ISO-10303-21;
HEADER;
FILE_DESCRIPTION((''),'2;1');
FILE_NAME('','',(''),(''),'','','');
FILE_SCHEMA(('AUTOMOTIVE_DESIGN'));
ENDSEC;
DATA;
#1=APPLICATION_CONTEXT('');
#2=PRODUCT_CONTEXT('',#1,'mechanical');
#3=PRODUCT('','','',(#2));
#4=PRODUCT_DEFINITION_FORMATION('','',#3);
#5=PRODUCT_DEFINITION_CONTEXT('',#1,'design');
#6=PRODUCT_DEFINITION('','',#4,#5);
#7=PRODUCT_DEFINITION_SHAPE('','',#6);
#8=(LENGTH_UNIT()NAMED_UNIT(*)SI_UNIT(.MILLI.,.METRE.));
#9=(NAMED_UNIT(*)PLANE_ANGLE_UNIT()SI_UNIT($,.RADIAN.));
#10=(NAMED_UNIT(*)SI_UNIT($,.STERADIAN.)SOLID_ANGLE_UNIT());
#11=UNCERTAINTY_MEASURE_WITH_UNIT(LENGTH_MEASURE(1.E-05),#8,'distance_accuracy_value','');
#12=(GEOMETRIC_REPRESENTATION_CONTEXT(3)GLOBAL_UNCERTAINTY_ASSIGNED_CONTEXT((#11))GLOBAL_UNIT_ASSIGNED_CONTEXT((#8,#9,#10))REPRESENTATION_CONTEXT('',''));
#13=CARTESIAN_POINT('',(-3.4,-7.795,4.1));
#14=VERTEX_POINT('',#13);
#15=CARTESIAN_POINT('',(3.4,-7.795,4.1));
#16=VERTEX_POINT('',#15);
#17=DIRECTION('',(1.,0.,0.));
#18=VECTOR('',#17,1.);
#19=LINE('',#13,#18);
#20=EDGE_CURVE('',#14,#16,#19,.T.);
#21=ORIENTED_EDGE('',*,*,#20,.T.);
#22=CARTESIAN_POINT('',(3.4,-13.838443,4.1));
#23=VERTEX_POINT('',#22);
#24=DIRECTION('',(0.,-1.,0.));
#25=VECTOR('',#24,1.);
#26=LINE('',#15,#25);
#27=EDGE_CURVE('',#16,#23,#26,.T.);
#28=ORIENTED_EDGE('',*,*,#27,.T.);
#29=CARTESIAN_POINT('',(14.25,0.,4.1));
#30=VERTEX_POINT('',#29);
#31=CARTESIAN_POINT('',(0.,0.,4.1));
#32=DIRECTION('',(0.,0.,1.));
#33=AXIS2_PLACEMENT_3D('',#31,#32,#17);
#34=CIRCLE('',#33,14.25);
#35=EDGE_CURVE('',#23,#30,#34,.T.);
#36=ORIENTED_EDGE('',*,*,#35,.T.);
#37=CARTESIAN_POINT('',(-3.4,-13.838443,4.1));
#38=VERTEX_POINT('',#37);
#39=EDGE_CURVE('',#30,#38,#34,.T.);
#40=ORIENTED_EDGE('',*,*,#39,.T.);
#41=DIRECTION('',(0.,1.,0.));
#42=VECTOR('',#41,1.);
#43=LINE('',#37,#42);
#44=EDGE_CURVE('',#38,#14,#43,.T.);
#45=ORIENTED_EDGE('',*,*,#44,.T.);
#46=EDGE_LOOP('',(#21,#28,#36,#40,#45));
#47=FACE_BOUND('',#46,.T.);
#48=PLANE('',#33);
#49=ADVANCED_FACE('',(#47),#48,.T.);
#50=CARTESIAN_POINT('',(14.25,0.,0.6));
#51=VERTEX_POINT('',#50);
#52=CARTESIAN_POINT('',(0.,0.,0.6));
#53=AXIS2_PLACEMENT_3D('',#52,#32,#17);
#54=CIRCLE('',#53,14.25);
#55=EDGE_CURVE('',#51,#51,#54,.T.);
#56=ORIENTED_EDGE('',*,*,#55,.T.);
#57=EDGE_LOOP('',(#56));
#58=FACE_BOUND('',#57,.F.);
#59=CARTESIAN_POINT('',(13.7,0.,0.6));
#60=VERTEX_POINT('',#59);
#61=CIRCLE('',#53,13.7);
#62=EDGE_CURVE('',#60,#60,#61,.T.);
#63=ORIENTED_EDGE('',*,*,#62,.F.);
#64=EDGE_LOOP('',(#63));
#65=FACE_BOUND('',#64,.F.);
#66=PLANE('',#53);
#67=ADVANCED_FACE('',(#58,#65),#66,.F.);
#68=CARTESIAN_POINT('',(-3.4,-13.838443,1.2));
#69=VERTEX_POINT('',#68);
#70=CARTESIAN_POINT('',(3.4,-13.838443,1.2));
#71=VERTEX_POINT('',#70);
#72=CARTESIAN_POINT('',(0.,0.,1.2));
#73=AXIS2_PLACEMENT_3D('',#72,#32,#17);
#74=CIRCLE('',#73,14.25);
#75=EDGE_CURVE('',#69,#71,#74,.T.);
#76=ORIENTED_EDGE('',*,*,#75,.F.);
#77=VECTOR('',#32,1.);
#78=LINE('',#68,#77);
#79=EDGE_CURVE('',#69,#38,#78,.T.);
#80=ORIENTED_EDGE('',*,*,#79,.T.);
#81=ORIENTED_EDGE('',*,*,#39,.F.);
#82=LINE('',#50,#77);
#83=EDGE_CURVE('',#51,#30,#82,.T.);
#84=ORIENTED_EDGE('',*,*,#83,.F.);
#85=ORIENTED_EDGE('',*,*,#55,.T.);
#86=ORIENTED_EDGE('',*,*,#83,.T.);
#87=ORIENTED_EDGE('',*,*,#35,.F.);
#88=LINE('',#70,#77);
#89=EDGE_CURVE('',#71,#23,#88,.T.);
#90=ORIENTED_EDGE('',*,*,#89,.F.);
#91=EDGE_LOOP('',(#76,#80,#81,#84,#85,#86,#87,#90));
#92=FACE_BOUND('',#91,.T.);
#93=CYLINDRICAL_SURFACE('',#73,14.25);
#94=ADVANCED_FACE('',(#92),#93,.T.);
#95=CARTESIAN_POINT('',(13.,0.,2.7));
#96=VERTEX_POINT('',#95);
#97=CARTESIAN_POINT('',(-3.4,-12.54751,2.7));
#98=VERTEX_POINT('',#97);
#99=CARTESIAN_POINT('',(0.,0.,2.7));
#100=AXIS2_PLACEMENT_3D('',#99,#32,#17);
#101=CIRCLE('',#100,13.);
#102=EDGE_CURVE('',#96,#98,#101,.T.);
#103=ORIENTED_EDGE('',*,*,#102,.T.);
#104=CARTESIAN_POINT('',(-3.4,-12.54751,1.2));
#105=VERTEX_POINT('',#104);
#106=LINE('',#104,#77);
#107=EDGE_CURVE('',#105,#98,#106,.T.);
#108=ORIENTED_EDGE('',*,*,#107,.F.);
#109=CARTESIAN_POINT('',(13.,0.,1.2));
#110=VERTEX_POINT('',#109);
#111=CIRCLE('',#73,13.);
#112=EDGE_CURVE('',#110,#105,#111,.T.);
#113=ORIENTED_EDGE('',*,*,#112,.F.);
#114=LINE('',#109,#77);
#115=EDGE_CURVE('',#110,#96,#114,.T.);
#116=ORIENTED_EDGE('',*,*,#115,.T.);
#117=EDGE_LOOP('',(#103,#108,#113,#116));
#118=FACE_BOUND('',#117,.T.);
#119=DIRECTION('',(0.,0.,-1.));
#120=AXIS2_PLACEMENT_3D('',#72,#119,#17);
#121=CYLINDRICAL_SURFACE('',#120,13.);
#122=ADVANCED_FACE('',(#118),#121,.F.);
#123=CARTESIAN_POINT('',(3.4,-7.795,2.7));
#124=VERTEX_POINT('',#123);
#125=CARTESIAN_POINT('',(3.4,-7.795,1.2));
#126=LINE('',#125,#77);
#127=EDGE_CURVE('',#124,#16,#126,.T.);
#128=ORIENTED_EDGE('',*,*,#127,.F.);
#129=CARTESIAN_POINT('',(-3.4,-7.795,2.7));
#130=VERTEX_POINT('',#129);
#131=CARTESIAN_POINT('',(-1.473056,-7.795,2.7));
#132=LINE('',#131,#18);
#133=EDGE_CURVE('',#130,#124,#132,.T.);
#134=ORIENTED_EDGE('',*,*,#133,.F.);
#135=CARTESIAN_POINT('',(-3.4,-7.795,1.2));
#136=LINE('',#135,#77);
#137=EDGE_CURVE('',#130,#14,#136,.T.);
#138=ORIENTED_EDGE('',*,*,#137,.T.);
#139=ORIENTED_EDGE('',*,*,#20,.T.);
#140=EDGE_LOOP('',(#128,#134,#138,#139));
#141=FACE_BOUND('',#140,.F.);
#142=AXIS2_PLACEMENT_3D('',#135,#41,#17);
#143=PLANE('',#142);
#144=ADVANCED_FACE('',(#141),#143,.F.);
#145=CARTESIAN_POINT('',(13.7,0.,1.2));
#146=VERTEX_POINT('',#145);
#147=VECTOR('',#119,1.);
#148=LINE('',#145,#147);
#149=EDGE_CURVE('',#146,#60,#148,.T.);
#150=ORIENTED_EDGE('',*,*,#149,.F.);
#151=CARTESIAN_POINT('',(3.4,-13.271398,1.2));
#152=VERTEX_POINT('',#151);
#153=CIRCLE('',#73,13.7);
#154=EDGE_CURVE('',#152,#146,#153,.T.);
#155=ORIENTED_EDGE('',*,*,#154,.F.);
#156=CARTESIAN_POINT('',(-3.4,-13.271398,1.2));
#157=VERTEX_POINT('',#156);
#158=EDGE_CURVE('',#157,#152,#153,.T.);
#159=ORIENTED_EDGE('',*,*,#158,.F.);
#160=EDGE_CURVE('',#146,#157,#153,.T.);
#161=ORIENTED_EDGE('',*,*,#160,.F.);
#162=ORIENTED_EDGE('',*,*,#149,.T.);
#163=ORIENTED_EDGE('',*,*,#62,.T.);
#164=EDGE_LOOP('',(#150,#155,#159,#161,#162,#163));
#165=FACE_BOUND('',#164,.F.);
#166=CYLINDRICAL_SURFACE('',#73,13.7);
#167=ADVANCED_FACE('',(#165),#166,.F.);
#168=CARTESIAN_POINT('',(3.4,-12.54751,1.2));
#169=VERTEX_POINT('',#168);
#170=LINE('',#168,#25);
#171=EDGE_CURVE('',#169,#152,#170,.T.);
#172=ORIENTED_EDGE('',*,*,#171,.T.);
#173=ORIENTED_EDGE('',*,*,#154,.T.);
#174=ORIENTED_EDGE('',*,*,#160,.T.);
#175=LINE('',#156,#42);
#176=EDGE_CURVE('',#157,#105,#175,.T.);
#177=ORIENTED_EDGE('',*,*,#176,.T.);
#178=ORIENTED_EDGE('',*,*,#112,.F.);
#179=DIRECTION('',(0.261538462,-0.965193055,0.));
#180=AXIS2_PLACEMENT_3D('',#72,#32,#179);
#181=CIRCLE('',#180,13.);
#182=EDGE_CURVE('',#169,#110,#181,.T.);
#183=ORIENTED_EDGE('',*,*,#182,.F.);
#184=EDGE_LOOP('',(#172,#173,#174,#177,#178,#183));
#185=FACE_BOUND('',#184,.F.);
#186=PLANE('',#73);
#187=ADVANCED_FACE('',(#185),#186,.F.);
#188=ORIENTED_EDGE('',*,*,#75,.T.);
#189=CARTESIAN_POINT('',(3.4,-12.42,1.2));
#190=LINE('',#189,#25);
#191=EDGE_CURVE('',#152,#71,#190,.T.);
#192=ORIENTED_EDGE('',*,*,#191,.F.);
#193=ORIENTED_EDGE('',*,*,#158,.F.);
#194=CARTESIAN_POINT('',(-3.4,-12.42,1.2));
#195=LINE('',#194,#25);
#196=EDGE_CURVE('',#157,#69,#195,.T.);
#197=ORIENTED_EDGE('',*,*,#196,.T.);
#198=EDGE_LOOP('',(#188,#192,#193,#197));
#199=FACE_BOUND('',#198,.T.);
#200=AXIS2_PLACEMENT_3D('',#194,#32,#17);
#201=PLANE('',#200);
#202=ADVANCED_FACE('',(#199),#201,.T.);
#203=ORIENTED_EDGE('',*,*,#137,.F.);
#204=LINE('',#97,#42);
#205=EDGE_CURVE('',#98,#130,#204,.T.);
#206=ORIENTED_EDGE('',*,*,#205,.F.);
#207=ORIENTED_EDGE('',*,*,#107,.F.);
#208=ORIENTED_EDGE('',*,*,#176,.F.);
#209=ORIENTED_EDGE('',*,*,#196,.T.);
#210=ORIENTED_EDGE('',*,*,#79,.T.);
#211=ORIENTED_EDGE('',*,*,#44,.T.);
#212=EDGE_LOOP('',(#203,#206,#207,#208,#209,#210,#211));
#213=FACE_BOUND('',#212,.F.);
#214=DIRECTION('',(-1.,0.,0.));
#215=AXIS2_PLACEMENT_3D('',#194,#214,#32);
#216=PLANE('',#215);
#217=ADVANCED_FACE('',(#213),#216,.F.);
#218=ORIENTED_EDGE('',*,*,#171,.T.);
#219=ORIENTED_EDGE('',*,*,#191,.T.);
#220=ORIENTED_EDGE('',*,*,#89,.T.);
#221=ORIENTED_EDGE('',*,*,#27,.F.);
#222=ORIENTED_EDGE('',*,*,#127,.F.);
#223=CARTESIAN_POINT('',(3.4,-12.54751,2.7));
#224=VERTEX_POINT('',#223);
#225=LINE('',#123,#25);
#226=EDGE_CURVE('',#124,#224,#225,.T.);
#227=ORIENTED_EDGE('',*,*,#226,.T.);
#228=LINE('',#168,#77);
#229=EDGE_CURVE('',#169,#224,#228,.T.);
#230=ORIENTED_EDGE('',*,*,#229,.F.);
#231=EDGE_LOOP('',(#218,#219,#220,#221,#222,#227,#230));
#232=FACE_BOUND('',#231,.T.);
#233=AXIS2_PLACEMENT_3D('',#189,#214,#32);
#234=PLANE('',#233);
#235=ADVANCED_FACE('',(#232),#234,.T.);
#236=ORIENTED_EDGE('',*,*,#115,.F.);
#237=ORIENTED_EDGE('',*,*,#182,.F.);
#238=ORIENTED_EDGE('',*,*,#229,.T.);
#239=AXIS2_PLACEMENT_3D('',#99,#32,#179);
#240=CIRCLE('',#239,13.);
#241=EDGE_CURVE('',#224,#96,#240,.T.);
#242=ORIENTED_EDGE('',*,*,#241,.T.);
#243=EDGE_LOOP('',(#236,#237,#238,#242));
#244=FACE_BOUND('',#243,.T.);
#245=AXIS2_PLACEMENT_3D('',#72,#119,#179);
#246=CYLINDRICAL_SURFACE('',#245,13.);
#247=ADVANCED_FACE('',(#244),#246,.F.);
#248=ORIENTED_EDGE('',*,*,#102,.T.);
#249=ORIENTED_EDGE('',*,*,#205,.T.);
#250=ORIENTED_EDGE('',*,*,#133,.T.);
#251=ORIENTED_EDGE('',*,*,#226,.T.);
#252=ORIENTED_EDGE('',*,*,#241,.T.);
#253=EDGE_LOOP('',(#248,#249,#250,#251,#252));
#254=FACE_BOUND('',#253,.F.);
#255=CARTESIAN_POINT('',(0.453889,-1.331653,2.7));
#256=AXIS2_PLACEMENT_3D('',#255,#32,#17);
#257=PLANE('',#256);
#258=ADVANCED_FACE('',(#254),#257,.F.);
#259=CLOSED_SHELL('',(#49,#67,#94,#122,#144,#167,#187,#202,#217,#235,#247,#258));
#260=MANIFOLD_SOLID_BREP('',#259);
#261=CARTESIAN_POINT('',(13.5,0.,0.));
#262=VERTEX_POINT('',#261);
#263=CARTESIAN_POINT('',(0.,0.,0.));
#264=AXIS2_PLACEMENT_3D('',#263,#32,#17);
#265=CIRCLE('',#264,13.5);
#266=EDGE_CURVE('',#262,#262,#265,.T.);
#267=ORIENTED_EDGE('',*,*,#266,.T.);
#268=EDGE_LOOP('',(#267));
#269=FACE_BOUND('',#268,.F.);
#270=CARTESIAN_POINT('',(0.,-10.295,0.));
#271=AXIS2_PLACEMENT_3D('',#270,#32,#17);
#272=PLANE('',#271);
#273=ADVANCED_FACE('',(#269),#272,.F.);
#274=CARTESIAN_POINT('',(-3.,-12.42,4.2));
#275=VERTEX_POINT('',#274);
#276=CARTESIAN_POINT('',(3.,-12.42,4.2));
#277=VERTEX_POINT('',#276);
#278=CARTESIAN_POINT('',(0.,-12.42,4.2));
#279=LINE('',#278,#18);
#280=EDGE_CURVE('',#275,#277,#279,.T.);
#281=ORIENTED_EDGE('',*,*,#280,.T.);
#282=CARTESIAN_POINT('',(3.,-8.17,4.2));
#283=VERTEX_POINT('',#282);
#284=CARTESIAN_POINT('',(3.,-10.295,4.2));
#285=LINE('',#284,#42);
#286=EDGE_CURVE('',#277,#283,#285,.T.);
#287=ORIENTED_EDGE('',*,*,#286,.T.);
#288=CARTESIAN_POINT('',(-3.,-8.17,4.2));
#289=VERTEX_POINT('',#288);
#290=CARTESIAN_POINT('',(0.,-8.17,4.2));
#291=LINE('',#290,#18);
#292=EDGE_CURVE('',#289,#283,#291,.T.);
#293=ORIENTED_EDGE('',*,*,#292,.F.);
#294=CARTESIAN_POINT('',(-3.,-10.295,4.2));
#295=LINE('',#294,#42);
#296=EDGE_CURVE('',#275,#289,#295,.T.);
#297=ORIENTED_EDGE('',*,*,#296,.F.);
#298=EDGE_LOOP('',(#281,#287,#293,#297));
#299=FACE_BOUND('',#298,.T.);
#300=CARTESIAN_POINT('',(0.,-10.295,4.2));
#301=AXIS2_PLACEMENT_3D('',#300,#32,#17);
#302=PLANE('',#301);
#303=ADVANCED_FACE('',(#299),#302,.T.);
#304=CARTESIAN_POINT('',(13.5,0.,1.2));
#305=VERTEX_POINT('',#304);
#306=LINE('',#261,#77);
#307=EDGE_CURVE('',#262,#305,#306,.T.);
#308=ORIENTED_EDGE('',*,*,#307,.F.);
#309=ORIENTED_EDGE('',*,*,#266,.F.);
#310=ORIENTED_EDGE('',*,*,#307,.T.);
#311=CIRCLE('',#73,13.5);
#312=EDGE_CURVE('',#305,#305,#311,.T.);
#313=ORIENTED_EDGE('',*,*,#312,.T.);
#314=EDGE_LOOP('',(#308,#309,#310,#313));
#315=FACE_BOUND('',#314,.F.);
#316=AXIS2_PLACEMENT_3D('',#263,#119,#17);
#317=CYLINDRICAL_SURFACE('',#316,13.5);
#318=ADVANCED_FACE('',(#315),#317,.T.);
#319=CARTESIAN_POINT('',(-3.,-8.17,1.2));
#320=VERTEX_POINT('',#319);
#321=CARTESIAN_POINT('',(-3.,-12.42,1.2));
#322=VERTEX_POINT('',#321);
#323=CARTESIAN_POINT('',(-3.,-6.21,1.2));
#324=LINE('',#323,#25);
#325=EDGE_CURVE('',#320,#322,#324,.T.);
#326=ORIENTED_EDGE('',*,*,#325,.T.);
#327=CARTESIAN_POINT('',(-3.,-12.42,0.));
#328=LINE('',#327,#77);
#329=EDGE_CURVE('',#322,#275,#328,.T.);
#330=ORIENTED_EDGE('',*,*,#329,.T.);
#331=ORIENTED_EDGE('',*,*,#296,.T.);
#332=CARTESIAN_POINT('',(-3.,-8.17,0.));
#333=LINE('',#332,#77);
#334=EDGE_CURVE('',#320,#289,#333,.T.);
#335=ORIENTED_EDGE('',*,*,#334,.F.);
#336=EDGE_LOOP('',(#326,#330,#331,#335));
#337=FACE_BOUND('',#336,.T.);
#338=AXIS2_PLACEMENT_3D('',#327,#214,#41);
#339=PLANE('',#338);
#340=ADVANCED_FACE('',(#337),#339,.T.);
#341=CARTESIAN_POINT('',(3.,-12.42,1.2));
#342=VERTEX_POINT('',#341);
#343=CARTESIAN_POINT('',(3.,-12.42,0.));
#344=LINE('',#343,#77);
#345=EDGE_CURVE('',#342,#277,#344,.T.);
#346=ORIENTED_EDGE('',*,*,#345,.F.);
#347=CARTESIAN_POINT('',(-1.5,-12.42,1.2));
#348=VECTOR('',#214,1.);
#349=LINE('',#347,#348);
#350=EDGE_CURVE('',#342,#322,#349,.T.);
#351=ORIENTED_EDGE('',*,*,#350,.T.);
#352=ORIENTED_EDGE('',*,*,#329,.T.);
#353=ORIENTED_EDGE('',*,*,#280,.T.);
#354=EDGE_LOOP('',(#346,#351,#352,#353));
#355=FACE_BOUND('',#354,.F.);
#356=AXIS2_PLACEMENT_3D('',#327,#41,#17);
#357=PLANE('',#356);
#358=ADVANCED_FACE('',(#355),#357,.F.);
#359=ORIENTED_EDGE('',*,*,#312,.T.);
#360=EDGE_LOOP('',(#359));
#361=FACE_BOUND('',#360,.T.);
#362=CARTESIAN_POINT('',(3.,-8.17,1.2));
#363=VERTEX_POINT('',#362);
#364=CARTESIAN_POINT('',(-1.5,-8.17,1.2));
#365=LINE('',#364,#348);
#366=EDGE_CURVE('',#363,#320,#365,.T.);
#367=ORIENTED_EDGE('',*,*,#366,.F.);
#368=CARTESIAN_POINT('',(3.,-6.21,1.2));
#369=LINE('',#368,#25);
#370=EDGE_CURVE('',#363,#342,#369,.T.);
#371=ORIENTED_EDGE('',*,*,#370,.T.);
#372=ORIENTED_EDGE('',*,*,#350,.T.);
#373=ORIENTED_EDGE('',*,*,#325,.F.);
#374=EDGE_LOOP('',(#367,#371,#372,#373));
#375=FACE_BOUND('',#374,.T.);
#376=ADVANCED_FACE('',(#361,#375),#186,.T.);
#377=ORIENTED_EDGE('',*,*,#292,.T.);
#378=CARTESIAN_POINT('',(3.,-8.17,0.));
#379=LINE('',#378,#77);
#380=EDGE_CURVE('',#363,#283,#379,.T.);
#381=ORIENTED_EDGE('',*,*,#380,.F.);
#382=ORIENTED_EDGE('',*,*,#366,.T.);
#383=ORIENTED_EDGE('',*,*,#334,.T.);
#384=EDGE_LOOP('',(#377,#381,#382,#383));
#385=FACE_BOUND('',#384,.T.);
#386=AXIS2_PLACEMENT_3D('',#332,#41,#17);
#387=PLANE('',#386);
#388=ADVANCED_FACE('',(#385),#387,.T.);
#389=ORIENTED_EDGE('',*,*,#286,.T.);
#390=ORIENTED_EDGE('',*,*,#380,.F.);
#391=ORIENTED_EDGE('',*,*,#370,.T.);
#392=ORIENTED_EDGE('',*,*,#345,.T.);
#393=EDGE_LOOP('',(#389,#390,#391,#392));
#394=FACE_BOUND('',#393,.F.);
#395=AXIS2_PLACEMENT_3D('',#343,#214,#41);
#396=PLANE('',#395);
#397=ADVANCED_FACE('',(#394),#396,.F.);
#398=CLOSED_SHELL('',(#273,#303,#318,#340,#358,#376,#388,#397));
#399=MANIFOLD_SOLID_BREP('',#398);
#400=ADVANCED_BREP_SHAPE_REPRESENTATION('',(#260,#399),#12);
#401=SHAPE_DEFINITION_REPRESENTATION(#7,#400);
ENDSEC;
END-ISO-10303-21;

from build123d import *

# Parameters (mm, degrees)
F0_R     = 13.5
F0_W     = 6
F0_H     = 4.25
F1_DEPTH = 1.2
F2_DEPTH = 4.2
F3_R     = 14.25
F3_R_2   = 13.7
F3_R_3   = 13.5
F4_DEPTH = 2.9
F5_DEPTH = 0.6
F3_W     = 6
F3_H     = 4.25
F6_DEPTH = 1.5
F7_W     = 6.8
F7_H     = 3
F8_DEPTH = 8


with BuildPart() as f1:
    # F0 (on Top) → F1 (new body)
    with BuildSketch(Plane.XY):
        Circle(F0_R)
        with Locations((0, -10.295)):
            Rectangle(F0_W, F0_H, mode=Mode.SUBTRACT)
        with Locations((0, -10.295)):
            Rectangle(F0_W, F0_H)
    extrude(amount=F1_DEPTH)

    # F0 (on Top) → F2 (join)
    with BuildSketch(Plane.XY):
        with Locations((0, -10.295)):
            Rectangle(F0_W, F0_H)
    extrude(amount=F2_DEPTH)


with BuildPart() as f4:
    # F3 (on face) → F4 (new body)
    with BuildSketch(Plane.XY.offset(1.2)):
        Circle(F3_R)
        Circle(F3_R_2, mode=Mode.SUBTRACT)
        Circle(F3_R_2)
        Circle(F3_R_3, mode=Mode.SUBTRACT)
        Circle(F3_R_3)
        with BuildLine():
            Line((3.4, -12.5475097131), (3.4, -12.795))
            Line((3.4, -12.795), (2.2995597405, -12.795))
            ThreePointArc((2.2995597405, -12.795), (0, -13), (-2.2995597405, -12.795))
            Line((-2.2995597405, -12.795), (-3.4, -12.795))
            Line((-3.4, -12.795), (-3.4, -12.5475097131))
            ThreePointArc((-3.4, -12.5475097131), (-7.8993670633, 10.3247275993), (13, 0))
            ThreePointArc((13, 0), (10.3247275993, -7.8993670633), (3.4, -12.5475097131))
        make_face(mode=Mode.SUBTRACT)
        with BuildLine():
            Line((3.4, -7.795), (3.4, -12.5475097131))
            ThreePointArc((3.4, -12.5475097131), (10.3247275993, -7.8993670633), (13, 0))
            ThreePointArc((13, 0), (-7.8993670633, 10.3247275993), (-3.4, -12.5475097131))
            Line((-3.4, -12.5475097131), (-3.4, -7.795))
            Line((-3.4, -7.795), (3.4, -7.795))
        make_face()
        with BuildLine():
            ThreePointArc((-2.2995597405, -12.795), (0, -13), (2.2995597405, -12.795))
            Line((2.2995597405, -12.795), (-2.2995597405, -12.795))
        make_face()
    extrude(amount=F4_DEPTH)

    # F3 (on face) → F5 (join)
    with BuildSketch(Plane.XY.offset(1.2)):
        Circle(F3_R)
        Circle(F3_R_2, mode=Mode.SUBTRACT)
    extrude(amount=-F5_DEPTH)

    # F3 (on face) → F6 (cut)
    with BuildSketch(Plane.XY.offset(1.2)):
        with BuildLine():
            Line((3.4, -7.795), (3.4, -12.5475097131))
            ThreePointArc((3.4, -12.5475097131), (10.3247275993, -7.8993670633), (13, 0))
            ThreePointArc((13, 0), (-7.8993670633, 10.3247275993), (-3.4, -12.5475097131))
            Line((-3.4, -12.5475097131), (-3.4, -7.795))
            Line((-3.4, -7.795), (3.4, -7.795))
        make_face()
        with BuildLine():
            Line((-2.2995597405, -12.795), (2.2995597405, -12.795))
            ThreePointArc((2.2995597405, -12.795), (2.8524652793, -12.6831952532), (3.4, -12.5475097131))
            Line((3.4, -12.5475097131), (3.4, -7.795))
            Line((3.4, -7.795), (-3.4, -7.795))
            Line((-3.4, -7.795), (-3.4, -12.5475097131))
            ThreePointArc((-3.4, -12.5475097131), (-2.8524652793, -12.6831952532), (-2.2995597405, -12.795))
        make_face()
        with Locations((0, -10.295)):
            Rectangle(F3_W, F3_H, mode=Mode.SUBTRACT)
        with BuildLine():
            ThreePointArc((-2.2995597405, -12.795), (0, -13), (2.2995597405, -12.795))
            Line((2.2995597405, -12.795), (-2.2995597405, -12.795))
        make_face()
    extrude(amount=F6_DEPTH, mode=Mode.SUBTRACT)

    # F7 (on face) → F8 (cut)
    with BuildSketch(Plane.XZ.offset(12.42)):
        with Locations((0, 2.7)):
            Rectangle(F7_W, F7_H)
    extrude(amount=F8_DEPTH, mode=Mode.SUBTRACT)


solid = Compound([f1.part, f4.part])
